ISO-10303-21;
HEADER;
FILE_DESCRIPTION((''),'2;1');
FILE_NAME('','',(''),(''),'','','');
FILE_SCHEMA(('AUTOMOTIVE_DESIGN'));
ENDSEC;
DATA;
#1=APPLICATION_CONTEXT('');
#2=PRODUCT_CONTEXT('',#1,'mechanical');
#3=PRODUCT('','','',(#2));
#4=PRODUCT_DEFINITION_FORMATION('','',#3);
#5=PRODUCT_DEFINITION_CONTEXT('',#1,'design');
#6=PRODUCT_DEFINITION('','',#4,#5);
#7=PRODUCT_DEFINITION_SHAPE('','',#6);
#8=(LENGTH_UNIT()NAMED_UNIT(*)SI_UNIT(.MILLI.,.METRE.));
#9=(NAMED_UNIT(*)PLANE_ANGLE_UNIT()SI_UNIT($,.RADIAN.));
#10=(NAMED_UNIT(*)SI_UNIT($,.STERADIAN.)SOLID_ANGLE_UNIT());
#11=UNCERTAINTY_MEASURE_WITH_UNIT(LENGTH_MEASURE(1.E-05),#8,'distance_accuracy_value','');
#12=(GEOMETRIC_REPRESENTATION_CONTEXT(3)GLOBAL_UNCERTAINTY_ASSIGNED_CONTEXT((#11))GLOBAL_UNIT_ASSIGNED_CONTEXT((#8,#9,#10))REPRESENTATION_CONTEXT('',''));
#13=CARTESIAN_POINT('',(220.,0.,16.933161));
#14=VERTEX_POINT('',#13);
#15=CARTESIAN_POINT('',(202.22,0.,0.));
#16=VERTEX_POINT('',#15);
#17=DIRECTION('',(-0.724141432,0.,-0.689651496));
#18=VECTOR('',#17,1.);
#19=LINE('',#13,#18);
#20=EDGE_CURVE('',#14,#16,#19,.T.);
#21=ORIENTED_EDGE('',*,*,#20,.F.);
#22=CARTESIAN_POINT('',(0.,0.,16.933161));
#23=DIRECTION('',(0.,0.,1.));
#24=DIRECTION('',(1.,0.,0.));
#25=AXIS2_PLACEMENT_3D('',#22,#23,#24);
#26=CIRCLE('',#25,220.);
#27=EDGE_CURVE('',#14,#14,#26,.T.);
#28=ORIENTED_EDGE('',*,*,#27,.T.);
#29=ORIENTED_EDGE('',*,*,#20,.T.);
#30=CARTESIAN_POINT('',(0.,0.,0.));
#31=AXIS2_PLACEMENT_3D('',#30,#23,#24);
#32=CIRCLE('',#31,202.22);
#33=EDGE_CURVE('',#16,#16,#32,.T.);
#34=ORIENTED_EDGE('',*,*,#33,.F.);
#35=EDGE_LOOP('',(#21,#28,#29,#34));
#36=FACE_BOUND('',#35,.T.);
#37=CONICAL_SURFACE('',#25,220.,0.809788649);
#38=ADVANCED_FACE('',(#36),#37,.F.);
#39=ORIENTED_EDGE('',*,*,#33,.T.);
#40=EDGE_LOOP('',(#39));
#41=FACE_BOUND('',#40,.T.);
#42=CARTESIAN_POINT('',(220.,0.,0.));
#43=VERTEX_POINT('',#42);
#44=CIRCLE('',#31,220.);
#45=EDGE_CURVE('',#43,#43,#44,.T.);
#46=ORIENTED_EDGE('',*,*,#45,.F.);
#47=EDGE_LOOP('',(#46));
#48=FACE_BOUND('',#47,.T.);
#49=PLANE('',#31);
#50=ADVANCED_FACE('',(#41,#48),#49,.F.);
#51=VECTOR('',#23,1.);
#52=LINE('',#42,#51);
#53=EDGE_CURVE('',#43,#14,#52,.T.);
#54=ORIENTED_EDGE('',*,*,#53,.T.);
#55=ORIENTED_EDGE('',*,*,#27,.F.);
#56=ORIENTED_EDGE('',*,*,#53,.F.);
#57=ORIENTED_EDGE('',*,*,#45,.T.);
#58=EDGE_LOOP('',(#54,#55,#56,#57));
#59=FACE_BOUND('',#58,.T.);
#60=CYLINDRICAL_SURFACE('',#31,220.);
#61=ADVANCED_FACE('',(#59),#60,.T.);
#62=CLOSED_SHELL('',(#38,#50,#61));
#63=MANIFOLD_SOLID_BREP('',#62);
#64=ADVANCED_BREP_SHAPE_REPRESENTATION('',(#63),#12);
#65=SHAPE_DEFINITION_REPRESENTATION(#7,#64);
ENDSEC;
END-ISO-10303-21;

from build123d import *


# Not quite as in the source:
# - the program builds the solid bodies; features that only make, move or delete a surface that nothing else refers to are left out


with BuildPart() as f4:
    # F2 (on Front) → F4 (revolve)
    with BuildSketch(Plane.XZ):
        Polygon((202.22, 0), (220, 0), (220, 16.9331612126), align=None)
    revolve(axis=Axis((0, 0, 31.6398665309), (0, 0, 1)))


solid = f4.part
